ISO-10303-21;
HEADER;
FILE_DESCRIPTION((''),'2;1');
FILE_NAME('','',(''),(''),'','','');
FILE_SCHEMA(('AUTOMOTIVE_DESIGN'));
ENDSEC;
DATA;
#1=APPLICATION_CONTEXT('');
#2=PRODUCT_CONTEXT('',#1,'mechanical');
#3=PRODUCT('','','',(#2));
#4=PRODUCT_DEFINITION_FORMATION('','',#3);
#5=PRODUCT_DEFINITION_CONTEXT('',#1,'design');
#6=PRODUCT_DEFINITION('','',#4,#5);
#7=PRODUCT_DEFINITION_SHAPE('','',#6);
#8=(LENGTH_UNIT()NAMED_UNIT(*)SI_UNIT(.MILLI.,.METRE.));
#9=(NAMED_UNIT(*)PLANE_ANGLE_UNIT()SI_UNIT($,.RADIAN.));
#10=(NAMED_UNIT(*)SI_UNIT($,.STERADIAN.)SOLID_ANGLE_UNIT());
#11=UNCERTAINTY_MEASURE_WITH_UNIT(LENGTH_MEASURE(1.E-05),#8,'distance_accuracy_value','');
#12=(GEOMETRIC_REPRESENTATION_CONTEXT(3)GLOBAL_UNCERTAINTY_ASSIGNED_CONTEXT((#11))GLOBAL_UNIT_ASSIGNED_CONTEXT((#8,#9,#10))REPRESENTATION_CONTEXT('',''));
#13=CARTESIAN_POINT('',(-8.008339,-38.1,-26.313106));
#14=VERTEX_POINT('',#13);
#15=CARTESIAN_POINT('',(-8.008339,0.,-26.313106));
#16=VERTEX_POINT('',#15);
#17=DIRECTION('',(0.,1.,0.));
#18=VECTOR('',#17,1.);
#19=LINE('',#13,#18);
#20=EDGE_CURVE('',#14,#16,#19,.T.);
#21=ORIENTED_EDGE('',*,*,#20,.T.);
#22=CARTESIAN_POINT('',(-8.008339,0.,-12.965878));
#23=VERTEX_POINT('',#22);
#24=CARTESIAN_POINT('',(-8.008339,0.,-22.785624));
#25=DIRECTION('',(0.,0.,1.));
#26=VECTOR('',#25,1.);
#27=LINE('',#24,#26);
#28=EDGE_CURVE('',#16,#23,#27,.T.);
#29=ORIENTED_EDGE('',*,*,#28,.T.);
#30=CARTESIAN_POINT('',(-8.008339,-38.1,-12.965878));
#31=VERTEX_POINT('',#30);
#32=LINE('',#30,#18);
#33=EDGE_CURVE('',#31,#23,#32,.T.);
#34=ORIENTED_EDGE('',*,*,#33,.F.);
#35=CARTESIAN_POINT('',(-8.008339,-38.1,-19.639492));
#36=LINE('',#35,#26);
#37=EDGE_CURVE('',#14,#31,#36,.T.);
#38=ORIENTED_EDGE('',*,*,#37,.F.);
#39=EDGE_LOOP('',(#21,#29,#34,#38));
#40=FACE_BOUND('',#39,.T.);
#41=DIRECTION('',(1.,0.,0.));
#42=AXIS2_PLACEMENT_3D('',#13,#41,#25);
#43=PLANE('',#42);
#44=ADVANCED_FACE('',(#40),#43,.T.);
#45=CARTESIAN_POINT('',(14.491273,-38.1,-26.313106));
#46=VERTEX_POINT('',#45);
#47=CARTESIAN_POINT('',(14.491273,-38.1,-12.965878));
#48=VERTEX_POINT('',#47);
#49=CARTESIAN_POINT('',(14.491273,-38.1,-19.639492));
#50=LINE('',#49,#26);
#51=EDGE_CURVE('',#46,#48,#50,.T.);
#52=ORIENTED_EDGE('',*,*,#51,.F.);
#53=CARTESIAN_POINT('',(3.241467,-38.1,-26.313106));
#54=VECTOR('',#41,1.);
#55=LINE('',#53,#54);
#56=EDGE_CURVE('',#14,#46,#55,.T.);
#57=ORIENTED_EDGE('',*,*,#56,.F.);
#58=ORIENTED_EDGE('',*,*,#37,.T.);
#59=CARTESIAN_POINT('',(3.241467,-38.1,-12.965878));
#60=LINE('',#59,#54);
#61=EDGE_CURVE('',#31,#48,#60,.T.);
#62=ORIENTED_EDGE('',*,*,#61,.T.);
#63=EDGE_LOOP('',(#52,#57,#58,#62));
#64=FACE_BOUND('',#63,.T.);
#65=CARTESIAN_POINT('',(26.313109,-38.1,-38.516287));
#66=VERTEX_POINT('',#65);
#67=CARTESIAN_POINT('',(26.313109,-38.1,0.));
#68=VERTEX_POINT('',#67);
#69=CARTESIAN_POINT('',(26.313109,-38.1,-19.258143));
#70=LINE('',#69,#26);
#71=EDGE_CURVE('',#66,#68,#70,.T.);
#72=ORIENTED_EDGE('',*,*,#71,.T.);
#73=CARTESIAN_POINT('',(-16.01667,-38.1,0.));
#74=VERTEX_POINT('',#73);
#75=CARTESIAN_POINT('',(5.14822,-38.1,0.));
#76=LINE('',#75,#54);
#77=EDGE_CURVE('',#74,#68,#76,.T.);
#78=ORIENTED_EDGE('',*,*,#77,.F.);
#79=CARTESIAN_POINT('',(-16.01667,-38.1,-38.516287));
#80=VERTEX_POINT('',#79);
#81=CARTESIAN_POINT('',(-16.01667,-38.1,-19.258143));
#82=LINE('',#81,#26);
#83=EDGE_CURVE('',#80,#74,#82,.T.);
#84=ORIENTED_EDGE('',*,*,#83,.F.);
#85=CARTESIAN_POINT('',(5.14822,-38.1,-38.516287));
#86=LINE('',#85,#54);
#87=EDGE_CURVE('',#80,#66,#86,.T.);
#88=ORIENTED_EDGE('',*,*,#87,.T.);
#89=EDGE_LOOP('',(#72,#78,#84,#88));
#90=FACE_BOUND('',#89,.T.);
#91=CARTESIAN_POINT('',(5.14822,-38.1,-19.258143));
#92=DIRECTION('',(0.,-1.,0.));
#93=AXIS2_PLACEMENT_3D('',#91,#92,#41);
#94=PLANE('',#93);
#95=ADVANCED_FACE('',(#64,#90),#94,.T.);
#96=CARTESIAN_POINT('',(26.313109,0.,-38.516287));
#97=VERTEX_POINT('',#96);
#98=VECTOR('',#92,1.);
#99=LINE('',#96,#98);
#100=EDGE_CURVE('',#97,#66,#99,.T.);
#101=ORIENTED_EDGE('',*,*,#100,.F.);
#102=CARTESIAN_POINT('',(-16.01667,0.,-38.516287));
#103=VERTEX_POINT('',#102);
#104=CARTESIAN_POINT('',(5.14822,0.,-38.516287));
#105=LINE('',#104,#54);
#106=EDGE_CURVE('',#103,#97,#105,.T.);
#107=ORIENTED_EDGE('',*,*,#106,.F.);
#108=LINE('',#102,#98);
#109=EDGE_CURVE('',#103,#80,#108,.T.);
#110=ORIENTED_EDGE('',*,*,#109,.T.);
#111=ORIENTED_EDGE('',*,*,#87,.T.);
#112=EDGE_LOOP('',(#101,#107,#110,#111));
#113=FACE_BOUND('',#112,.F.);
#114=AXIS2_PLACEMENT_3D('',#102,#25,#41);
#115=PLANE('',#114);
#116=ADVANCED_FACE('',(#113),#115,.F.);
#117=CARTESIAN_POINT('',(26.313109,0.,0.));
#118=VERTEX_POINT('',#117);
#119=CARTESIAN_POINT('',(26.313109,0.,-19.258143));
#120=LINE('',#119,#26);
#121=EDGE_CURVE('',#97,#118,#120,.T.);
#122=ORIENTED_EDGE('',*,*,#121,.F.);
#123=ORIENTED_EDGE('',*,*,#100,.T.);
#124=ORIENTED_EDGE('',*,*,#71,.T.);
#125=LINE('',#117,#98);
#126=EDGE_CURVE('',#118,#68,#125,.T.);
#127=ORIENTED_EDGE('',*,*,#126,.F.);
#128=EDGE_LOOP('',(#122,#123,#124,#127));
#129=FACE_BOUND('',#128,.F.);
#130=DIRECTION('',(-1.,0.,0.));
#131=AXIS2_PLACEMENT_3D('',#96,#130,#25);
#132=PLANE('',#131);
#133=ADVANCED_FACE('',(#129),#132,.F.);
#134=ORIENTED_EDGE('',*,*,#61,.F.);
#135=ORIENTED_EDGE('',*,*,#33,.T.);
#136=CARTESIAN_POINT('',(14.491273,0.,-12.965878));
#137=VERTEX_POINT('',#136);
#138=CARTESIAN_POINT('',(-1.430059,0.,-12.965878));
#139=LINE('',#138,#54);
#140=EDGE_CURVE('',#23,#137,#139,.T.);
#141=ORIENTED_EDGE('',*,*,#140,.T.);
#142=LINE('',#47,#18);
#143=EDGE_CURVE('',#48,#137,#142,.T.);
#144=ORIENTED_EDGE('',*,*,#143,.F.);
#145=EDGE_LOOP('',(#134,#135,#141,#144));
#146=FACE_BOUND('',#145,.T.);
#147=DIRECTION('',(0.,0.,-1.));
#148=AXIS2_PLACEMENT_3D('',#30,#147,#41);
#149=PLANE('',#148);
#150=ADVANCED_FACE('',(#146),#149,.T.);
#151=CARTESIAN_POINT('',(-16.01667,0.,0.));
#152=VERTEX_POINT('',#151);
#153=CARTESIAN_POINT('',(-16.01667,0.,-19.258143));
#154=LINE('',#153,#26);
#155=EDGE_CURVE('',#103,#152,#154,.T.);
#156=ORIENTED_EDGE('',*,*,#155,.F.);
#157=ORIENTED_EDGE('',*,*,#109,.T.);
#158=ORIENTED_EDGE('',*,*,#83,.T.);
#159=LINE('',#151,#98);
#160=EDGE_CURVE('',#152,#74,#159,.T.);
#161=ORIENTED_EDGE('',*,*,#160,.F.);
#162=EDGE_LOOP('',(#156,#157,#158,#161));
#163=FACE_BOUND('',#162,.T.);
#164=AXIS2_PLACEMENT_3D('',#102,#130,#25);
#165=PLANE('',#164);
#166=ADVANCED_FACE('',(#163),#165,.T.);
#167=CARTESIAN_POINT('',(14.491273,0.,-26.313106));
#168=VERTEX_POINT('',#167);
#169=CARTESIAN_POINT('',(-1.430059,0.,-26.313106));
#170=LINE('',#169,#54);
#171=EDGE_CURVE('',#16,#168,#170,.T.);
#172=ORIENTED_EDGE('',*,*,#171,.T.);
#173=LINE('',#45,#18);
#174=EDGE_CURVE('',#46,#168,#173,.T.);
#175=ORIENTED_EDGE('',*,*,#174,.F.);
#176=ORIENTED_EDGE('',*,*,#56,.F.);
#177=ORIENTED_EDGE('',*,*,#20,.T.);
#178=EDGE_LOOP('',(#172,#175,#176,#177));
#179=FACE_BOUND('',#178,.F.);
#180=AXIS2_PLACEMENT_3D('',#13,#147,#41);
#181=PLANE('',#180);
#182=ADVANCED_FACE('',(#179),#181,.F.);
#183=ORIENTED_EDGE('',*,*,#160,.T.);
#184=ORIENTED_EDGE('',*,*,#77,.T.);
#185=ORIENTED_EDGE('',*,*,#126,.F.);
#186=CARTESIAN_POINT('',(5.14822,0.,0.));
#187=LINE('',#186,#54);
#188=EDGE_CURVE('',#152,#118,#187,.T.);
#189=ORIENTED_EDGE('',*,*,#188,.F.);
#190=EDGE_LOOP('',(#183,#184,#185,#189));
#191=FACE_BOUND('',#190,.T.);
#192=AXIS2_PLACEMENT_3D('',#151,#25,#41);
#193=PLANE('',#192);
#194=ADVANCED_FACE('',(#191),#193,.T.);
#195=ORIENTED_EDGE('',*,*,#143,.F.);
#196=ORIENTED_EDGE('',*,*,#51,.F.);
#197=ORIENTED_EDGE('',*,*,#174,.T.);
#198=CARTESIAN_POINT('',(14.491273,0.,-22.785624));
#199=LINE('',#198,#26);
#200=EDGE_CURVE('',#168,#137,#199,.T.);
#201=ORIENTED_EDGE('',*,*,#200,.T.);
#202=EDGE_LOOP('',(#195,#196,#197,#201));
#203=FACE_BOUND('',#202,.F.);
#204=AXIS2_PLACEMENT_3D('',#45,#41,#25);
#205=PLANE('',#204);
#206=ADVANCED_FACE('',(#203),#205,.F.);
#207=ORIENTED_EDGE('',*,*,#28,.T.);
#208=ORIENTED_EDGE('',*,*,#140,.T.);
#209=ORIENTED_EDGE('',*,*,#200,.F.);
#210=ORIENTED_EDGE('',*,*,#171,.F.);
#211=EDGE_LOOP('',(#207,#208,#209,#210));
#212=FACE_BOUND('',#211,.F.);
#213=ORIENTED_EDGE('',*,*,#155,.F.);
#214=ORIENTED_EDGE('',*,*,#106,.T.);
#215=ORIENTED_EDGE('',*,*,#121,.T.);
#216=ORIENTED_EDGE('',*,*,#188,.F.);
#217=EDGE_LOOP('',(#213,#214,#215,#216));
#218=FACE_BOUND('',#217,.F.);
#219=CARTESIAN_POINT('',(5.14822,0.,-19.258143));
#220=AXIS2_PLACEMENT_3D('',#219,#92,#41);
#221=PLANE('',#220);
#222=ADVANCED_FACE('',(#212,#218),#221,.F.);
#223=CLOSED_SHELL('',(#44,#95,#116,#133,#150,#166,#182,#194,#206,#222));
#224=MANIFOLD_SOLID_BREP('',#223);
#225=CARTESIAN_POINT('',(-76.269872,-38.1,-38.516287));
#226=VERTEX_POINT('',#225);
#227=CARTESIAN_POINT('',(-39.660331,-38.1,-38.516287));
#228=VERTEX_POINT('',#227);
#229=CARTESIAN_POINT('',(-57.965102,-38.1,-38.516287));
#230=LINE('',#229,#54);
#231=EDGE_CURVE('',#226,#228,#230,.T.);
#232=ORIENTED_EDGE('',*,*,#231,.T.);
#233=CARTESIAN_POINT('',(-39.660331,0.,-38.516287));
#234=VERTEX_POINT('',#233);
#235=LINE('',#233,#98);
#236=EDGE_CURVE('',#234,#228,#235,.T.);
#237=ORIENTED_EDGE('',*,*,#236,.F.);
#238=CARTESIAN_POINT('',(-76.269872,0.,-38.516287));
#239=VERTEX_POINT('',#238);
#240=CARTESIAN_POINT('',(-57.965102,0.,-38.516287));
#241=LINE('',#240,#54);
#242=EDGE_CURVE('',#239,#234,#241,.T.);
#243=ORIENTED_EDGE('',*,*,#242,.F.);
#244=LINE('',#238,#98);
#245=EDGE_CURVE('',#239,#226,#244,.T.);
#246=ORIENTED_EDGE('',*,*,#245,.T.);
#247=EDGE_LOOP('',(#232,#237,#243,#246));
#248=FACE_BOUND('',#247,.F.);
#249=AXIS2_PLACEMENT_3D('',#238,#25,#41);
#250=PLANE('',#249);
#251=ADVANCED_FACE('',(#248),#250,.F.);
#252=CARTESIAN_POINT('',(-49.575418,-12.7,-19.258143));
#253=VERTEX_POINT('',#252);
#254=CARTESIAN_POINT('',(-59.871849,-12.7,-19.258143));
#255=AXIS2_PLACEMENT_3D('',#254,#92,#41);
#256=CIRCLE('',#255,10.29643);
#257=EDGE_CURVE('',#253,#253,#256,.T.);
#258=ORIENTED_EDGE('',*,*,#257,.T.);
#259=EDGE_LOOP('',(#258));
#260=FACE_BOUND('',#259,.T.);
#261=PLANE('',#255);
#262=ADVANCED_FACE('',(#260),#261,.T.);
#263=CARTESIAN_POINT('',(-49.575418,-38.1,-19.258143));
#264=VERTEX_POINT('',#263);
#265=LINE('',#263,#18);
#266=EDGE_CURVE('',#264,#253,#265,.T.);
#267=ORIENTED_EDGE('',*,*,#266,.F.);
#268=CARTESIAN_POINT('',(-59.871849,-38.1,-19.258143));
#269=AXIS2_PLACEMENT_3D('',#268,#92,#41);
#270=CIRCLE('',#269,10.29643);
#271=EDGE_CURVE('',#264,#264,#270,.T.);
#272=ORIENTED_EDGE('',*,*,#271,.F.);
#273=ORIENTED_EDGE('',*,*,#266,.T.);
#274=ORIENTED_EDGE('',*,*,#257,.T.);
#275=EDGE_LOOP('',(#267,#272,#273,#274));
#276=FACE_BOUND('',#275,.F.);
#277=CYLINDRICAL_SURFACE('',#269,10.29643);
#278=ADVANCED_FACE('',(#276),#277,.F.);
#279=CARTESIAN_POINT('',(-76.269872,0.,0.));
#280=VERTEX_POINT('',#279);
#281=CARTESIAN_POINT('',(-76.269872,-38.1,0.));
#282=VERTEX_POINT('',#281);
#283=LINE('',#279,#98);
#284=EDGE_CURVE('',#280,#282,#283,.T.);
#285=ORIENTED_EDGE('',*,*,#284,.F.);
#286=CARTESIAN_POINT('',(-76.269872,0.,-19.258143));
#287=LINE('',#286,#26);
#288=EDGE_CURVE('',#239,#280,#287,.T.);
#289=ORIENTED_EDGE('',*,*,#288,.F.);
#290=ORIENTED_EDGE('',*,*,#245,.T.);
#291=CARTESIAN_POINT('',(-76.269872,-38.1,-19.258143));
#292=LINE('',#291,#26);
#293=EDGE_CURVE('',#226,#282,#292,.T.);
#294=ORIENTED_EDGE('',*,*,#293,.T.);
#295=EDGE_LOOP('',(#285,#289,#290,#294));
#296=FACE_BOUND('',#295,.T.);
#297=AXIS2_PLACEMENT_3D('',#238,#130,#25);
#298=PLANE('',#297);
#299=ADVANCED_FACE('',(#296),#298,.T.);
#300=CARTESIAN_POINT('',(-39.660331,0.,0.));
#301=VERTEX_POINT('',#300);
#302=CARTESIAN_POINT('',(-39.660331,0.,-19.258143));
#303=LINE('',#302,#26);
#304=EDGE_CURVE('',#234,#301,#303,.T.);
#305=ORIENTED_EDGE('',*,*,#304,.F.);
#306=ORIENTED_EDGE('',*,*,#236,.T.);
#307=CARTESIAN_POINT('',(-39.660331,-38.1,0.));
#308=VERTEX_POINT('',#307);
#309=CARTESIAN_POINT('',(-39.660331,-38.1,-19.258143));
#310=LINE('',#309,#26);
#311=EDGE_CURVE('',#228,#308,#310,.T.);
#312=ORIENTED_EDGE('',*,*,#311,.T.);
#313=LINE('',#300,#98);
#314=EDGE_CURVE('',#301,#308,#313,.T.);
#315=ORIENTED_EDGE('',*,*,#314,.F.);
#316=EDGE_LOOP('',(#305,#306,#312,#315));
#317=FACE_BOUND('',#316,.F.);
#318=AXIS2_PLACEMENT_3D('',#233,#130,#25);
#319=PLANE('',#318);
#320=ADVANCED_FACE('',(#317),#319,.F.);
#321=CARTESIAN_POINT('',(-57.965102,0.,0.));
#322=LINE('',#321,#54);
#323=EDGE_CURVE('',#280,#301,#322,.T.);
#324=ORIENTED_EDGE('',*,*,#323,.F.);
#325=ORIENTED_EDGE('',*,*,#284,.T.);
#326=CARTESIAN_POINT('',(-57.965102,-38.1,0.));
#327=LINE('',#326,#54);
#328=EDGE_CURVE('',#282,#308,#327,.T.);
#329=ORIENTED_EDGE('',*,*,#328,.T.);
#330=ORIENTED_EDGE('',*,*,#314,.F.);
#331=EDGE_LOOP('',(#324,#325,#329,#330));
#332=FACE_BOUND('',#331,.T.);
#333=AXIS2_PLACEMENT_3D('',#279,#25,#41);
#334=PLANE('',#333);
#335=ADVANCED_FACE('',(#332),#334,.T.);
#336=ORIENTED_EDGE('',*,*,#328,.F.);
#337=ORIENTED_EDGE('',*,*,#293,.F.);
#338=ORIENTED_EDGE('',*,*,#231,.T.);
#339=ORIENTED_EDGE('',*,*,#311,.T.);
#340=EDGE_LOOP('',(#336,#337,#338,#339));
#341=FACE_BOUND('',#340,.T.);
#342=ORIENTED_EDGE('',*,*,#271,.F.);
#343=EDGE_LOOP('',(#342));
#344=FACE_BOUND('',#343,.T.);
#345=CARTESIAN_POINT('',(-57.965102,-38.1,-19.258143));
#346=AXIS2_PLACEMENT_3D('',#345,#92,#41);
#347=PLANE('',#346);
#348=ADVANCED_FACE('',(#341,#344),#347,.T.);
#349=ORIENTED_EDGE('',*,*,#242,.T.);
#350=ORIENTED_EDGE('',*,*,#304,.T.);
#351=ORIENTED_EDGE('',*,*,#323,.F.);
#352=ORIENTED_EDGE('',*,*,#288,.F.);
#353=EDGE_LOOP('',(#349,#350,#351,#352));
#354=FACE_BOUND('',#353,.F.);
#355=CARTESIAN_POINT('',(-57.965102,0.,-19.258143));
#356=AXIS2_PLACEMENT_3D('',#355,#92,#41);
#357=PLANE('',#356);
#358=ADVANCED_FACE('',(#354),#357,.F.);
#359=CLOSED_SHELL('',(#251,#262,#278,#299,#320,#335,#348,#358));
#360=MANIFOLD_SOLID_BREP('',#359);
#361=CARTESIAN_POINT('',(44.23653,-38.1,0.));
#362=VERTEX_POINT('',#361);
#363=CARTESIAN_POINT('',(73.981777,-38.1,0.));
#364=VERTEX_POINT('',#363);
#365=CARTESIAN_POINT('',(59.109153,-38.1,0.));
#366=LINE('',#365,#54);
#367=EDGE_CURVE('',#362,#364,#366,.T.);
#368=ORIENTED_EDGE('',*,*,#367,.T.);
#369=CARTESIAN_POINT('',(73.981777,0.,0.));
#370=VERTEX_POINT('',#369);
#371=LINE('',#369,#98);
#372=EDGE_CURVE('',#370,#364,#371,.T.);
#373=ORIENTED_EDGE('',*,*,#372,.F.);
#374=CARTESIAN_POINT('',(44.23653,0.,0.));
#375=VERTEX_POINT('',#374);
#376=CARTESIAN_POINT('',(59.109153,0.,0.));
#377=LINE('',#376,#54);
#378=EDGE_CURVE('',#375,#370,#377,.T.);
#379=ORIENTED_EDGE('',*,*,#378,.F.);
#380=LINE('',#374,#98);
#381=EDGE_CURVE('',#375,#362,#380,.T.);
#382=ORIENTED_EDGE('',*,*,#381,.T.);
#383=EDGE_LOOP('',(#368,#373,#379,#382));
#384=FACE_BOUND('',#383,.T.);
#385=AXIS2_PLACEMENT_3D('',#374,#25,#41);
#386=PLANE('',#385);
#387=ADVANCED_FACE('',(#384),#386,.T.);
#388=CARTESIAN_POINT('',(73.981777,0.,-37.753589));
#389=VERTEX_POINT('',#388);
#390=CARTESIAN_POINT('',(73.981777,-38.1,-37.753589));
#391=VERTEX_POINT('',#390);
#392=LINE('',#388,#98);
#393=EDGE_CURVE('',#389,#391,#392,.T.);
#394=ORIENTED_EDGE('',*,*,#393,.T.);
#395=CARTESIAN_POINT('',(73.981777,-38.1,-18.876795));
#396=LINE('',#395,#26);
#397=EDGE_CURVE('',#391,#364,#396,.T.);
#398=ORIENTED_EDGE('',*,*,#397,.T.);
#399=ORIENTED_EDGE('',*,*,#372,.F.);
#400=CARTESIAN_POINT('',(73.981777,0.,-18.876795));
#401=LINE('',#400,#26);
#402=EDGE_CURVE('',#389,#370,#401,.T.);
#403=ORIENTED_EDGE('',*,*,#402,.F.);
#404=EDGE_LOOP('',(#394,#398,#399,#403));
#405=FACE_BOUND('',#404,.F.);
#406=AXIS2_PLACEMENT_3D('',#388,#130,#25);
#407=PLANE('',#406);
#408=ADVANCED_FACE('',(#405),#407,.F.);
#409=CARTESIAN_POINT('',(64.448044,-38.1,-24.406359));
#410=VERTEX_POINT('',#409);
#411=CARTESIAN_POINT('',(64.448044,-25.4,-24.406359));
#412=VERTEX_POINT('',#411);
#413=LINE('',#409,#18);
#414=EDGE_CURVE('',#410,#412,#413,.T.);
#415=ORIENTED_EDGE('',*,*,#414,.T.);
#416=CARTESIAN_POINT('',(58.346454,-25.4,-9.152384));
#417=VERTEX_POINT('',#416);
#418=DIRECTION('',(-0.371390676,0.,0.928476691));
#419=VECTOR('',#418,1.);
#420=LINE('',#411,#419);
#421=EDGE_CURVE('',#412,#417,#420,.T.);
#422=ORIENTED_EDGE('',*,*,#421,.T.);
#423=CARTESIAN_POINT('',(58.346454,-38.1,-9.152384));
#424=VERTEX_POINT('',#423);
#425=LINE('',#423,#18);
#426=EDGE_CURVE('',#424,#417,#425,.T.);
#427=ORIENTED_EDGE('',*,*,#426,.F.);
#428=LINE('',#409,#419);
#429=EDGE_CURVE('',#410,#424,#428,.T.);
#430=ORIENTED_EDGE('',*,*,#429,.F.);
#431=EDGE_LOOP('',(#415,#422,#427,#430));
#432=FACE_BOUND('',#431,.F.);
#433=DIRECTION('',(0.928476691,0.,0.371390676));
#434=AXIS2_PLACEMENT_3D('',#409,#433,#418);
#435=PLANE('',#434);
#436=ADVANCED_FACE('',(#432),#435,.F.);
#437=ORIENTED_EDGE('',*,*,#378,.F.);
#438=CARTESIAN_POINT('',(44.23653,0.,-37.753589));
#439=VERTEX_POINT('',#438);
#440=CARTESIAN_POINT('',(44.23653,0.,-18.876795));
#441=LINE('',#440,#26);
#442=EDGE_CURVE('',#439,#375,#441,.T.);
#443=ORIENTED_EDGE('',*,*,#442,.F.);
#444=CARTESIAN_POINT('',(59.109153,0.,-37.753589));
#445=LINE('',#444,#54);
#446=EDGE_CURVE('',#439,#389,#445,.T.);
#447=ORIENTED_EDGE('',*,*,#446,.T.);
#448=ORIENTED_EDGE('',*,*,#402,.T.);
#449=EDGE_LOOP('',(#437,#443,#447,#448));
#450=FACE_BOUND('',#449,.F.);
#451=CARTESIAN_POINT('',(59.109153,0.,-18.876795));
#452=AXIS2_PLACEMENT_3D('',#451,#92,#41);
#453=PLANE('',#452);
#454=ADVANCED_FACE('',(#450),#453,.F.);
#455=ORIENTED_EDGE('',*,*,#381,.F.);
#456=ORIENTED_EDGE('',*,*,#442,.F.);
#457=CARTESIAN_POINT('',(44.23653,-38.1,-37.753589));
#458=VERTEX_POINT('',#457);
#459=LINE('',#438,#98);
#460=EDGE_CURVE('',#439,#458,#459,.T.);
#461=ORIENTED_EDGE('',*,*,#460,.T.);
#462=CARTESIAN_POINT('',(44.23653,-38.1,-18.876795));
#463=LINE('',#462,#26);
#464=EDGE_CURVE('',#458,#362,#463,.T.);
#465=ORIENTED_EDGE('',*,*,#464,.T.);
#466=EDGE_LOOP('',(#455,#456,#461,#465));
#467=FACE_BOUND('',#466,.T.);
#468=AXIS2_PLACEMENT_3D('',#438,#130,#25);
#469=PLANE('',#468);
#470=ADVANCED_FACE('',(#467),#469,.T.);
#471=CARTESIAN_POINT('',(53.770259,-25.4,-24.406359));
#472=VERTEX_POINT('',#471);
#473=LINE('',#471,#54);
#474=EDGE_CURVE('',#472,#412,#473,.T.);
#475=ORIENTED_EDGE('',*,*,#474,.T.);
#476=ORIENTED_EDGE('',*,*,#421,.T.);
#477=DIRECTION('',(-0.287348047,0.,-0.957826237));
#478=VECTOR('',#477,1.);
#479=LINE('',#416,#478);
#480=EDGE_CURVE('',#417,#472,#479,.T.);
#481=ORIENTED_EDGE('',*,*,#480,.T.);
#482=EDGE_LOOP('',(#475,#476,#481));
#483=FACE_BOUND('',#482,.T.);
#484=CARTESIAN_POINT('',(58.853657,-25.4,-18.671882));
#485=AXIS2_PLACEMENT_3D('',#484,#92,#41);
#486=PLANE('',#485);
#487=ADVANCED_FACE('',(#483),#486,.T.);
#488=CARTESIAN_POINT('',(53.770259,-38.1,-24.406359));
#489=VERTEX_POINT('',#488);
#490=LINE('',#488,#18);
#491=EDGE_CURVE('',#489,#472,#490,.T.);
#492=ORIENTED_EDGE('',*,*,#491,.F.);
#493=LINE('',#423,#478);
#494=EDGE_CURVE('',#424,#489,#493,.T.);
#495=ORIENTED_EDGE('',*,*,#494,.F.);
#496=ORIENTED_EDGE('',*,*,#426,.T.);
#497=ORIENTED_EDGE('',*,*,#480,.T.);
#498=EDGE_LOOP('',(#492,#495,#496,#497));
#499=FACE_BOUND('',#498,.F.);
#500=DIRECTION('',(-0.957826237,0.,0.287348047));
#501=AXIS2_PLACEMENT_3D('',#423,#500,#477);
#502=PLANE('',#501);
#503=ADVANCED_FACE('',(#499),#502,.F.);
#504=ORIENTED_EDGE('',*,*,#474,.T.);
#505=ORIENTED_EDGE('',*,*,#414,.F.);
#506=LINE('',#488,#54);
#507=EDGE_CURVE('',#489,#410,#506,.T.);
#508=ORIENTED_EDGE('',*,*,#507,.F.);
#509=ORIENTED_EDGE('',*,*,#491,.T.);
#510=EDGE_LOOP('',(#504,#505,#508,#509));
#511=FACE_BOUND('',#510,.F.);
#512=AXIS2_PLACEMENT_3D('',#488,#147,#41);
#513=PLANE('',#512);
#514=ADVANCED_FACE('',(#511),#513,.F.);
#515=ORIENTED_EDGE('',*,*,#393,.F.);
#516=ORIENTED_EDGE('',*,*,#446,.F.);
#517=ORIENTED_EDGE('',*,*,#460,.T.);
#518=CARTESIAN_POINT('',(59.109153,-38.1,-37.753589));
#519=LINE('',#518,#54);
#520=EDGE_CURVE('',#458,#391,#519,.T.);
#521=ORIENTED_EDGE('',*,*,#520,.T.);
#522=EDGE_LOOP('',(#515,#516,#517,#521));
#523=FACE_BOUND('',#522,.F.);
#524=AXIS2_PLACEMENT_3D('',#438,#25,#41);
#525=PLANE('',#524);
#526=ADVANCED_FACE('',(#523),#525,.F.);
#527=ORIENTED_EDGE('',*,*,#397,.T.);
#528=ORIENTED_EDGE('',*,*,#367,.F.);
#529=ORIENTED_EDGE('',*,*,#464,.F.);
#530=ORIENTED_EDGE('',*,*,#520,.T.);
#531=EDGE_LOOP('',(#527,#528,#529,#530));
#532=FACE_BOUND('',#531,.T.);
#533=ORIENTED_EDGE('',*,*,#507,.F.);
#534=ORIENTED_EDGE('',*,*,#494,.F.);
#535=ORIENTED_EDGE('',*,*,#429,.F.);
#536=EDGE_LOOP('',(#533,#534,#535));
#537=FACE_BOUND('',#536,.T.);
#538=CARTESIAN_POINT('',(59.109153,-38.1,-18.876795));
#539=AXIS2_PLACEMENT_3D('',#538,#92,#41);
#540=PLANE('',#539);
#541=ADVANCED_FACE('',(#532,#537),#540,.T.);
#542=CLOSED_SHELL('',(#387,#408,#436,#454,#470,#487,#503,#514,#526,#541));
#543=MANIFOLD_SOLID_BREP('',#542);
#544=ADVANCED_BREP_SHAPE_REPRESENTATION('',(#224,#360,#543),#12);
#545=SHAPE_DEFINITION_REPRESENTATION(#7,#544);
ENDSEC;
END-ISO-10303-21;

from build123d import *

# Parameters (mm, degrees)
F0_W      = 36.6095416248
F0_H      = 38.5162867606
F5_DEPTH  = 38.1
F2_W      = 42.3297788948
F2_H      = 38.5162867606
F6_DEPTH  = 38.1
F4_W      = 29.745247215
F4_H      = 37.7535894513
F7_DEPTH  = 38.1
F13_DEPTH = 12.7
F11_W     = 22.4996116012
F11_H     = 13.3472280577
F14_DEPTH = 50.8
F10_R     = 10.2964304388
F15_DEPTH = 25.4


# Not quite as in the source:
# - the program builds the solid bodies; features that only make, move or delete a surface that nothing else refers to are left out


with BuildPart() as f5:
    # F0 (on Front) → F5 (new body)
    with BuildSketch(Plane.XZ):
        with Locations((-57.9651016742, -19.2581433803)):
            Rectangle(F0_W, F0_H)
    extrude(amount=F5_DEPTH)

    # F10 (on face) → F15 (cut)
    with BuildSketch(Plane.XZ.offset(38.1)):
        with Locations((-59.8718486726, -19.2581433803)):
            Circle(F10_R)
    extrude(amount=-F15_DEPTH, mode=Mode.SUBTRACT)


with BuildPart() as f6:
    # F2 (on Front) → F6 (new body)
    with BuildSketch(Plane.XZ):
        with Locations((5.148219876, -19.2581433803)):
            Rectangle(F2_W, F2_H)
    extrude(amount=F6_DEPTH)

    # F11 (on face) → F14 (cut)
    with BuildSketch(Plane.XZ.offset(38.1)):
        with Locations((3.2414672896, -19.6394915693)):
            Rectangle(F11_W, F11_H)
    extrude(amount=-F14_DEPTH, mode=Mode.SUBTRACT)


with BuildPart() as f7:
    # F4 (on Front) → F7 (new body)
    with BuildSketch(Plane.XZ):
        with Locations((59.109153226, -18.8767947257)):
            Rectangle(F4_W, F4_H)
    extrude(amount=F7_DEPTH)

    # F12 (on face) → F13 (cut)
    with BuildSketch(Plane.XZ.offset(38.1)):
        Polygon((58.3464540541, -9.1523844749), (53.7702590227, -24.4063585997), (64.448043704, -24.4063585997), align=None)
    extrude(amount=-F13_DEPTH, mode=Mode.SUBTRACT)


solid = Compound([f5.part, f6.part, f7.part])
